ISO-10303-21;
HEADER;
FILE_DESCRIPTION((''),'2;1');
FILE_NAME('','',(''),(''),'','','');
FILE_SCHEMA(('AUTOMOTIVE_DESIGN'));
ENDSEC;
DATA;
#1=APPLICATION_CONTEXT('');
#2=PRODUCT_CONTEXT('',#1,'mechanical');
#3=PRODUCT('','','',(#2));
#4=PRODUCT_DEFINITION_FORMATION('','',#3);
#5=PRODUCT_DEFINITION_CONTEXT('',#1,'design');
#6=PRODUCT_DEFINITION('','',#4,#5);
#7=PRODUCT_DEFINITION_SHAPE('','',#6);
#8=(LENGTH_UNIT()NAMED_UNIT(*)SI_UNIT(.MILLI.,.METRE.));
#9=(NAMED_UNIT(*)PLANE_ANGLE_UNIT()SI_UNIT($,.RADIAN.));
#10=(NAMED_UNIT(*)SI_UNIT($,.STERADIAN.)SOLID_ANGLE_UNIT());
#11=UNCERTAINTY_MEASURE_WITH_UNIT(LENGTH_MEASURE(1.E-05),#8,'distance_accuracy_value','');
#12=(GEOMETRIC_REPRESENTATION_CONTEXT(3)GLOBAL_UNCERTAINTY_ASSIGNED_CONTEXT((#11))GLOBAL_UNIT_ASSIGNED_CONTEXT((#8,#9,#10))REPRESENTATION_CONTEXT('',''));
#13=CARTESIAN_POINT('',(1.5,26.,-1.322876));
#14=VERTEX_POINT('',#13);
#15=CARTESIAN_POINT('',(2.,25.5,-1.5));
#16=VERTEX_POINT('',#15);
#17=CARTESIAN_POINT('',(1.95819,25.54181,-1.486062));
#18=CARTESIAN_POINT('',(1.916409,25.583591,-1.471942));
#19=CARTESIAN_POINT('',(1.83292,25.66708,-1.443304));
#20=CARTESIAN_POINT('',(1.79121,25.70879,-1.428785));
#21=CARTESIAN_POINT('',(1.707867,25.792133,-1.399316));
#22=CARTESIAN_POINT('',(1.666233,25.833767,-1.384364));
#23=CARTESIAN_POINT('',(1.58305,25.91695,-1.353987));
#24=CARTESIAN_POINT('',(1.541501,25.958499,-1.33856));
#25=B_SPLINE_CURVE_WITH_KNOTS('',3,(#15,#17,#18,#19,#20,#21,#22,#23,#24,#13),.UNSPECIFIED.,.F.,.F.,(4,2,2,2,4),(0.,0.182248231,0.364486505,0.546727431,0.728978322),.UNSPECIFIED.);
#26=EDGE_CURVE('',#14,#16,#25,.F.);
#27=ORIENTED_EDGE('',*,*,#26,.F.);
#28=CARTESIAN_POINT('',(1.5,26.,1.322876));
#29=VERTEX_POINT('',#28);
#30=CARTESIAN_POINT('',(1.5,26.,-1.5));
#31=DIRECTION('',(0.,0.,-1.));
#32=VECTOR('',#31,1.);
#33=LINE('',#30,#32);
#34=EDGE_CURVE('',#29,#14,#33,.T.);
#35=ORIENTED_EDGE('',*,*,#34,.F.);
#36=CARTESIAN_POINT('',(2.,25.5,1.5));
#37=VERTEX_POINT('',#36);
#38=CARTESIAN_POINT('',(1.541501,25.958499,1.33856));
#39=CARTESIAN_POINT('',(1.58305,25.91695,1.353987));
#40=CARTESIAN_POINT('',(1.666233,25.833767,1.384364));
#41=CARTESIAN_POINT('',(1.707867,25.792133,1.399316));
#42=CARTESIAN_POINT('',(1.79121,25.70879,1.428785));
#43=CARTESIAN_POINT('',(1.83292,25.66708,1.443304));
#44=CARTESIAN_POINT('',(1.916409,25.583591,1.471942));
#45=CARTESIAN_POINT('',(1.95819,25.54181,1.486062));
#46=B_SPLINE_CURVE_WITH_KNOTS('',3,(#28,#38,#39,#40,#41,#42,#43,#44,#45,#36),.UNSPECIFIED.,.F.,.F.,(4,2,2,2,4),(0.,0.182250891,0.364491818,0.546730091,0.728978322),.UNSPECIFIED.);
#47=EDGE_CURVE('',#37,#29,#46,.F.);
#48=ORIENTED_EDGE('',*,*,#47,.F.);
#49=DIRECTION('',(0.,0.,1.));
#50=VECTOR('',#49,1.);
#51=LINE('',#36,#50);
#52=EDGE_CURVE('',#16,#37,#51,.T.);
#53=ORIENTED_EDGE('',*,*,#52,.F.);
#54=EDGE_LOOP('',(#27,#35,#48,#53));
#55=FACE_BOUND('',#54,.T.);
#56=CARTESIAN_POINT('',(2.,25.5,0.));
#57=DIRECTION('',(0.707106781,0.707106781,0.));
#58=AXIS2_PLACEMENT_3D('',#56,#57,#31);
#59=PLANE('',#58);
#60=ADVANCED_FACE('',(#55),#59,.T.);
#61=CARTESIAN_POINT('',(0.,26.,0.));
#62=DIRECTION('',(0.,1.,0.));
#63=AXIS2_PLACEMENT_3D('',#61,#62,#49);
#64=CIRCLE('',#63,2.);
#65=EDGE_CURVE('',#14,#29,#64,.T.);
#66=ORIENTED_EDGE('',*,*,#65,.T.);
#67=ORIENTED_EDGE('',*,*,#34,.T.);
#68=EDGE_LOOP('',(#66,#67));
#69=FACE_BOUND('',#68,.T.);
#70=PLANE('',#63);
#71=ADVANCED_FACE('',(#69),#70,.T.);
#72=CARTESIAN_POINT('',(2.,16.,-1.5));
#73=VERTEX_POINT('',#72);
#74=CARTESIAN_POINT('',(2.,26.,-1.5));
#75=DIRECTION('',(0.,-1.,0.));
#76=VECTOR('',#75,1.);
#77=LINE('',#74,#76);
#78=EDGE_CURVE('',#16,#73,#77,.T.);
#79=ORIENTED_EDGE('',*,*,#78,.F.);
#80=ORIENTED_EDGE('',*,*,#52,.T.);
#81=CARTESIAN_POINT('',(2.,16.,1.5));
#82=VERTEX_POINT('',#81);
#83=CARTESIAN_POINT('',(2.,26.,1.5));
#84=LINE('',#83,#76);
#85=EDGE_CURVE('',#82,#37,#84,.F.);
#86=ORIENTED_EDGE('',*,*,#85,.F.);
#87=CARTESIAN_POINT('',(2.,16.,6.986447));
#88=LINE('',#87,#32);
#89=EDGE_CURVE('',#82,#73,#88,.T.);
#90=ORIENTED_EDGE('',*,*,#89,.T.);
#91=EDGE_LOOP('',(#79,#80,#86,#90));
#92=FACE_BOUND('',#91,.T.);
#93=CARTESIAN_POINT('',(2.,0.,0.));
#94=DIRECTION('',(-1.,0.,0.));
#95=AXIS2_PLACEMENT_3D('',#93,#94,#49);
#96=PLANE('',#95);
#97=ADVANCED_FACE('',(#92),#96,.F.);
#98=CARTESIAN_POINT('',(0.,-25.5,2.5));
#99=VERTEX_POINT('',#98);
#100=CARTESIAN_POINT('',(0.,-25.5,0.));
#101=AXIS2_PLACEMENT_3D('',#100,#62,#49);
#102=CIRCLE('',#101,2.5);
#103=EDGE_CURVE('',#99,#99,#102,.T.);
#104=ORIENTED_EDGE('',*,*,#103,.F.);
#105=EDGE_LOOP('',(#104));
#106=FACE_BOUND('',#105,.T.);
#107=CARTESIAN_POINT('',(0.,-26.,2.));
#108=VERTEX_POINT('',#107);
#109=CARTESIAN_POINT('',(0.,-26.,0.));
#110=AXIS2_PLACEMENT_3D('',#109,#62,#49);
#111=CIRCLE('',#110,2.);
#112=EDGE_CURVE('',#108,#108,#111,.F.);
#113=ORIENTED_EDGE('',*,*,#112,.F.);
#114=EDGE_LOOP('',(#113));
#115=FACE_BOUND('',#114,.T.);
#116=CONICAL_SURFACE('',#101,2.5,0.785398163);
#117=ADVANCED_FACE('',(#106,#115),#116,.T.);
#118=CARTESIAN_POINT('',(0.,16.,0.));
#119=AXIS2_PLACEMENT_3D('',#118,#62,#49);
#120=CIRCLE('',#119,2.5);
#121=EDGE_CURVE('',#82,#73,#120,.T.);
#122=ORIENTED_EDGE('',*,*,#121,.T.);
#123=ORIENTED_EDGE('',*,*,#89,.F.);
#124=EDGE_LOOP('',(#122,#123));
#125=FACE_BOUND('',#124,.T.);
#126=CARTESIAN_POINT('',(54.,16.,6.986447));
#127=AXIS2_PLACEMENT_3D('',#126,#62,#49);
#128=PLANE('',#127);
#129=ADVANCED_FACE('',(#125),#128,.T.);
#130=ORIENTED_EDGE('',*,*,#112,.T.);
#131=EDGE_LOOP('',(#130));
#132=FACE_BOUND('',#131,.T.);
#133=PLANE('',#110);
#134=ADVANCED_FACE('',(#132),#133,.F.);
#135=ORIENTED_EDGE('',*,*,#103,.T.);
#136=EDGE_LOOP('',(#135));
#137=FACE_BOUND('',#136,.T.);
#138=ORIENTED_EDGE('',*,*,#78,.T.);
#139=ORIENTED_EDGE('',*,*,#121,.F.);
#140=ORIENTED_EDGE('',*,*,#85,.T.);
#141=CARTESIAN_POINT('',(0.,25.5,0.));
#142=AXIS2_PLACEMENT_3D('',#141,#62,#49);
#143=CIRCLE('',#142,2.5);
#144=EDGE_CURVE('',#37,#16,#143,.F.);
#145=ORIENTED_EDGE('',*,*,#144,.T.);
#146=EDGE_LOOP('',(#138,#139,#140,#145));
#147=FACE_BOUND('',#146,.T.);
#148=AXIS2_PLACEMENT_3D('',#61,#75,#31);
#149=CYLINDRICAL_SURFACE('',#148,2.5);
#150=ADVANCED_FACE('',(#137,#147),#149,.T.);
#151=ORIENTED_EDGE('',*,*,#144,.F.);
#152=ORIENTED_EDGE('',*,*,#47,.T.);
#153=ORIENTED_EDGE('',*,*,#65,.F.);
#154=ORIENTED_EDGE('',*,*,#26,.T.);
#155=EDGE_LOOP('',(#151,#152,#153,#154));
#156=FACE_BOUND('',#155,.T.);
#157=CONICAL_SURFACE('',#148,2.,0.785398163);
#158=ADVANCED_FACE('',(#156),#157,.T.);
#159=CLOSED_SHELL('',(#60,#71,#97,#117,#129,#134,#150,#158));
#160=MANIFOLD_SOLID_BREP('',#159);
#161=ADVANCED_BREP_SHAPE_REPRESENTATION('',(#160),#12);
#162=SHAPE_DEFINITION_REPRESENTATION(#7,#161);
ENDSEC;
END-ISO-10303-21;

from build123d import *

# Parameters (mm, degrees)
SKETCH1_R           = 2.5
BOSS_EXTRUDE1_DEPTH = 26
CUT_EXTRUDE1_START  = 2
SKETCH2_W           = 13.97289477
SKETCH2_H           = 14.193433712
CUT_EXTRUDE1_DEPTH  = 52
CHAMFER1_SIZE       = 0.5


with BuildPart() as part:
    # Sketch1 → Boss-Extrude1 (new, symmetric)
    with BuildSketch(Plane(origin=(0, 0, 0), x_dir=(1, 0, 0), z_dir=(0, 1, 0))):
        with Locations(Location((0, 0, 0), (0, 0, 90))):
            Circle(SKETCH1_R)
    extrude(amount=BOSS_EXTRUDE1_DEPTH, both=True)

    # Sketch2 → Cut-Extrude1 (cut)
    with BuildSketch(Plane(origin=(0, 0, 0), x_dir=(0, 0, -1), z_dir=(1, 0, 0)).offset(CUT_EXTRUDE1_START)):
        with Locations((0, 23.096716856)):
            Rectangle(SKETCH2_W, SKETCH2_H)
    extrude(amount=CUT_EXTRUDE1_DEPTH, mode=Mode.SUBTRACT)

    # Chamfer1
    chamfer1_edges = [part.edges().sort_by_distance(p)[0] for p in [
        (0, -26, 2.5),
        (-2.236067977, 26, 1.118033989),
        (2, 26, 0),
    ]]
    chamfer(chamfer1_edges, length=CHAMFER1_SIZE - 0.0001)  # a hair under: the kernel refuses the full size


solid = part.part
